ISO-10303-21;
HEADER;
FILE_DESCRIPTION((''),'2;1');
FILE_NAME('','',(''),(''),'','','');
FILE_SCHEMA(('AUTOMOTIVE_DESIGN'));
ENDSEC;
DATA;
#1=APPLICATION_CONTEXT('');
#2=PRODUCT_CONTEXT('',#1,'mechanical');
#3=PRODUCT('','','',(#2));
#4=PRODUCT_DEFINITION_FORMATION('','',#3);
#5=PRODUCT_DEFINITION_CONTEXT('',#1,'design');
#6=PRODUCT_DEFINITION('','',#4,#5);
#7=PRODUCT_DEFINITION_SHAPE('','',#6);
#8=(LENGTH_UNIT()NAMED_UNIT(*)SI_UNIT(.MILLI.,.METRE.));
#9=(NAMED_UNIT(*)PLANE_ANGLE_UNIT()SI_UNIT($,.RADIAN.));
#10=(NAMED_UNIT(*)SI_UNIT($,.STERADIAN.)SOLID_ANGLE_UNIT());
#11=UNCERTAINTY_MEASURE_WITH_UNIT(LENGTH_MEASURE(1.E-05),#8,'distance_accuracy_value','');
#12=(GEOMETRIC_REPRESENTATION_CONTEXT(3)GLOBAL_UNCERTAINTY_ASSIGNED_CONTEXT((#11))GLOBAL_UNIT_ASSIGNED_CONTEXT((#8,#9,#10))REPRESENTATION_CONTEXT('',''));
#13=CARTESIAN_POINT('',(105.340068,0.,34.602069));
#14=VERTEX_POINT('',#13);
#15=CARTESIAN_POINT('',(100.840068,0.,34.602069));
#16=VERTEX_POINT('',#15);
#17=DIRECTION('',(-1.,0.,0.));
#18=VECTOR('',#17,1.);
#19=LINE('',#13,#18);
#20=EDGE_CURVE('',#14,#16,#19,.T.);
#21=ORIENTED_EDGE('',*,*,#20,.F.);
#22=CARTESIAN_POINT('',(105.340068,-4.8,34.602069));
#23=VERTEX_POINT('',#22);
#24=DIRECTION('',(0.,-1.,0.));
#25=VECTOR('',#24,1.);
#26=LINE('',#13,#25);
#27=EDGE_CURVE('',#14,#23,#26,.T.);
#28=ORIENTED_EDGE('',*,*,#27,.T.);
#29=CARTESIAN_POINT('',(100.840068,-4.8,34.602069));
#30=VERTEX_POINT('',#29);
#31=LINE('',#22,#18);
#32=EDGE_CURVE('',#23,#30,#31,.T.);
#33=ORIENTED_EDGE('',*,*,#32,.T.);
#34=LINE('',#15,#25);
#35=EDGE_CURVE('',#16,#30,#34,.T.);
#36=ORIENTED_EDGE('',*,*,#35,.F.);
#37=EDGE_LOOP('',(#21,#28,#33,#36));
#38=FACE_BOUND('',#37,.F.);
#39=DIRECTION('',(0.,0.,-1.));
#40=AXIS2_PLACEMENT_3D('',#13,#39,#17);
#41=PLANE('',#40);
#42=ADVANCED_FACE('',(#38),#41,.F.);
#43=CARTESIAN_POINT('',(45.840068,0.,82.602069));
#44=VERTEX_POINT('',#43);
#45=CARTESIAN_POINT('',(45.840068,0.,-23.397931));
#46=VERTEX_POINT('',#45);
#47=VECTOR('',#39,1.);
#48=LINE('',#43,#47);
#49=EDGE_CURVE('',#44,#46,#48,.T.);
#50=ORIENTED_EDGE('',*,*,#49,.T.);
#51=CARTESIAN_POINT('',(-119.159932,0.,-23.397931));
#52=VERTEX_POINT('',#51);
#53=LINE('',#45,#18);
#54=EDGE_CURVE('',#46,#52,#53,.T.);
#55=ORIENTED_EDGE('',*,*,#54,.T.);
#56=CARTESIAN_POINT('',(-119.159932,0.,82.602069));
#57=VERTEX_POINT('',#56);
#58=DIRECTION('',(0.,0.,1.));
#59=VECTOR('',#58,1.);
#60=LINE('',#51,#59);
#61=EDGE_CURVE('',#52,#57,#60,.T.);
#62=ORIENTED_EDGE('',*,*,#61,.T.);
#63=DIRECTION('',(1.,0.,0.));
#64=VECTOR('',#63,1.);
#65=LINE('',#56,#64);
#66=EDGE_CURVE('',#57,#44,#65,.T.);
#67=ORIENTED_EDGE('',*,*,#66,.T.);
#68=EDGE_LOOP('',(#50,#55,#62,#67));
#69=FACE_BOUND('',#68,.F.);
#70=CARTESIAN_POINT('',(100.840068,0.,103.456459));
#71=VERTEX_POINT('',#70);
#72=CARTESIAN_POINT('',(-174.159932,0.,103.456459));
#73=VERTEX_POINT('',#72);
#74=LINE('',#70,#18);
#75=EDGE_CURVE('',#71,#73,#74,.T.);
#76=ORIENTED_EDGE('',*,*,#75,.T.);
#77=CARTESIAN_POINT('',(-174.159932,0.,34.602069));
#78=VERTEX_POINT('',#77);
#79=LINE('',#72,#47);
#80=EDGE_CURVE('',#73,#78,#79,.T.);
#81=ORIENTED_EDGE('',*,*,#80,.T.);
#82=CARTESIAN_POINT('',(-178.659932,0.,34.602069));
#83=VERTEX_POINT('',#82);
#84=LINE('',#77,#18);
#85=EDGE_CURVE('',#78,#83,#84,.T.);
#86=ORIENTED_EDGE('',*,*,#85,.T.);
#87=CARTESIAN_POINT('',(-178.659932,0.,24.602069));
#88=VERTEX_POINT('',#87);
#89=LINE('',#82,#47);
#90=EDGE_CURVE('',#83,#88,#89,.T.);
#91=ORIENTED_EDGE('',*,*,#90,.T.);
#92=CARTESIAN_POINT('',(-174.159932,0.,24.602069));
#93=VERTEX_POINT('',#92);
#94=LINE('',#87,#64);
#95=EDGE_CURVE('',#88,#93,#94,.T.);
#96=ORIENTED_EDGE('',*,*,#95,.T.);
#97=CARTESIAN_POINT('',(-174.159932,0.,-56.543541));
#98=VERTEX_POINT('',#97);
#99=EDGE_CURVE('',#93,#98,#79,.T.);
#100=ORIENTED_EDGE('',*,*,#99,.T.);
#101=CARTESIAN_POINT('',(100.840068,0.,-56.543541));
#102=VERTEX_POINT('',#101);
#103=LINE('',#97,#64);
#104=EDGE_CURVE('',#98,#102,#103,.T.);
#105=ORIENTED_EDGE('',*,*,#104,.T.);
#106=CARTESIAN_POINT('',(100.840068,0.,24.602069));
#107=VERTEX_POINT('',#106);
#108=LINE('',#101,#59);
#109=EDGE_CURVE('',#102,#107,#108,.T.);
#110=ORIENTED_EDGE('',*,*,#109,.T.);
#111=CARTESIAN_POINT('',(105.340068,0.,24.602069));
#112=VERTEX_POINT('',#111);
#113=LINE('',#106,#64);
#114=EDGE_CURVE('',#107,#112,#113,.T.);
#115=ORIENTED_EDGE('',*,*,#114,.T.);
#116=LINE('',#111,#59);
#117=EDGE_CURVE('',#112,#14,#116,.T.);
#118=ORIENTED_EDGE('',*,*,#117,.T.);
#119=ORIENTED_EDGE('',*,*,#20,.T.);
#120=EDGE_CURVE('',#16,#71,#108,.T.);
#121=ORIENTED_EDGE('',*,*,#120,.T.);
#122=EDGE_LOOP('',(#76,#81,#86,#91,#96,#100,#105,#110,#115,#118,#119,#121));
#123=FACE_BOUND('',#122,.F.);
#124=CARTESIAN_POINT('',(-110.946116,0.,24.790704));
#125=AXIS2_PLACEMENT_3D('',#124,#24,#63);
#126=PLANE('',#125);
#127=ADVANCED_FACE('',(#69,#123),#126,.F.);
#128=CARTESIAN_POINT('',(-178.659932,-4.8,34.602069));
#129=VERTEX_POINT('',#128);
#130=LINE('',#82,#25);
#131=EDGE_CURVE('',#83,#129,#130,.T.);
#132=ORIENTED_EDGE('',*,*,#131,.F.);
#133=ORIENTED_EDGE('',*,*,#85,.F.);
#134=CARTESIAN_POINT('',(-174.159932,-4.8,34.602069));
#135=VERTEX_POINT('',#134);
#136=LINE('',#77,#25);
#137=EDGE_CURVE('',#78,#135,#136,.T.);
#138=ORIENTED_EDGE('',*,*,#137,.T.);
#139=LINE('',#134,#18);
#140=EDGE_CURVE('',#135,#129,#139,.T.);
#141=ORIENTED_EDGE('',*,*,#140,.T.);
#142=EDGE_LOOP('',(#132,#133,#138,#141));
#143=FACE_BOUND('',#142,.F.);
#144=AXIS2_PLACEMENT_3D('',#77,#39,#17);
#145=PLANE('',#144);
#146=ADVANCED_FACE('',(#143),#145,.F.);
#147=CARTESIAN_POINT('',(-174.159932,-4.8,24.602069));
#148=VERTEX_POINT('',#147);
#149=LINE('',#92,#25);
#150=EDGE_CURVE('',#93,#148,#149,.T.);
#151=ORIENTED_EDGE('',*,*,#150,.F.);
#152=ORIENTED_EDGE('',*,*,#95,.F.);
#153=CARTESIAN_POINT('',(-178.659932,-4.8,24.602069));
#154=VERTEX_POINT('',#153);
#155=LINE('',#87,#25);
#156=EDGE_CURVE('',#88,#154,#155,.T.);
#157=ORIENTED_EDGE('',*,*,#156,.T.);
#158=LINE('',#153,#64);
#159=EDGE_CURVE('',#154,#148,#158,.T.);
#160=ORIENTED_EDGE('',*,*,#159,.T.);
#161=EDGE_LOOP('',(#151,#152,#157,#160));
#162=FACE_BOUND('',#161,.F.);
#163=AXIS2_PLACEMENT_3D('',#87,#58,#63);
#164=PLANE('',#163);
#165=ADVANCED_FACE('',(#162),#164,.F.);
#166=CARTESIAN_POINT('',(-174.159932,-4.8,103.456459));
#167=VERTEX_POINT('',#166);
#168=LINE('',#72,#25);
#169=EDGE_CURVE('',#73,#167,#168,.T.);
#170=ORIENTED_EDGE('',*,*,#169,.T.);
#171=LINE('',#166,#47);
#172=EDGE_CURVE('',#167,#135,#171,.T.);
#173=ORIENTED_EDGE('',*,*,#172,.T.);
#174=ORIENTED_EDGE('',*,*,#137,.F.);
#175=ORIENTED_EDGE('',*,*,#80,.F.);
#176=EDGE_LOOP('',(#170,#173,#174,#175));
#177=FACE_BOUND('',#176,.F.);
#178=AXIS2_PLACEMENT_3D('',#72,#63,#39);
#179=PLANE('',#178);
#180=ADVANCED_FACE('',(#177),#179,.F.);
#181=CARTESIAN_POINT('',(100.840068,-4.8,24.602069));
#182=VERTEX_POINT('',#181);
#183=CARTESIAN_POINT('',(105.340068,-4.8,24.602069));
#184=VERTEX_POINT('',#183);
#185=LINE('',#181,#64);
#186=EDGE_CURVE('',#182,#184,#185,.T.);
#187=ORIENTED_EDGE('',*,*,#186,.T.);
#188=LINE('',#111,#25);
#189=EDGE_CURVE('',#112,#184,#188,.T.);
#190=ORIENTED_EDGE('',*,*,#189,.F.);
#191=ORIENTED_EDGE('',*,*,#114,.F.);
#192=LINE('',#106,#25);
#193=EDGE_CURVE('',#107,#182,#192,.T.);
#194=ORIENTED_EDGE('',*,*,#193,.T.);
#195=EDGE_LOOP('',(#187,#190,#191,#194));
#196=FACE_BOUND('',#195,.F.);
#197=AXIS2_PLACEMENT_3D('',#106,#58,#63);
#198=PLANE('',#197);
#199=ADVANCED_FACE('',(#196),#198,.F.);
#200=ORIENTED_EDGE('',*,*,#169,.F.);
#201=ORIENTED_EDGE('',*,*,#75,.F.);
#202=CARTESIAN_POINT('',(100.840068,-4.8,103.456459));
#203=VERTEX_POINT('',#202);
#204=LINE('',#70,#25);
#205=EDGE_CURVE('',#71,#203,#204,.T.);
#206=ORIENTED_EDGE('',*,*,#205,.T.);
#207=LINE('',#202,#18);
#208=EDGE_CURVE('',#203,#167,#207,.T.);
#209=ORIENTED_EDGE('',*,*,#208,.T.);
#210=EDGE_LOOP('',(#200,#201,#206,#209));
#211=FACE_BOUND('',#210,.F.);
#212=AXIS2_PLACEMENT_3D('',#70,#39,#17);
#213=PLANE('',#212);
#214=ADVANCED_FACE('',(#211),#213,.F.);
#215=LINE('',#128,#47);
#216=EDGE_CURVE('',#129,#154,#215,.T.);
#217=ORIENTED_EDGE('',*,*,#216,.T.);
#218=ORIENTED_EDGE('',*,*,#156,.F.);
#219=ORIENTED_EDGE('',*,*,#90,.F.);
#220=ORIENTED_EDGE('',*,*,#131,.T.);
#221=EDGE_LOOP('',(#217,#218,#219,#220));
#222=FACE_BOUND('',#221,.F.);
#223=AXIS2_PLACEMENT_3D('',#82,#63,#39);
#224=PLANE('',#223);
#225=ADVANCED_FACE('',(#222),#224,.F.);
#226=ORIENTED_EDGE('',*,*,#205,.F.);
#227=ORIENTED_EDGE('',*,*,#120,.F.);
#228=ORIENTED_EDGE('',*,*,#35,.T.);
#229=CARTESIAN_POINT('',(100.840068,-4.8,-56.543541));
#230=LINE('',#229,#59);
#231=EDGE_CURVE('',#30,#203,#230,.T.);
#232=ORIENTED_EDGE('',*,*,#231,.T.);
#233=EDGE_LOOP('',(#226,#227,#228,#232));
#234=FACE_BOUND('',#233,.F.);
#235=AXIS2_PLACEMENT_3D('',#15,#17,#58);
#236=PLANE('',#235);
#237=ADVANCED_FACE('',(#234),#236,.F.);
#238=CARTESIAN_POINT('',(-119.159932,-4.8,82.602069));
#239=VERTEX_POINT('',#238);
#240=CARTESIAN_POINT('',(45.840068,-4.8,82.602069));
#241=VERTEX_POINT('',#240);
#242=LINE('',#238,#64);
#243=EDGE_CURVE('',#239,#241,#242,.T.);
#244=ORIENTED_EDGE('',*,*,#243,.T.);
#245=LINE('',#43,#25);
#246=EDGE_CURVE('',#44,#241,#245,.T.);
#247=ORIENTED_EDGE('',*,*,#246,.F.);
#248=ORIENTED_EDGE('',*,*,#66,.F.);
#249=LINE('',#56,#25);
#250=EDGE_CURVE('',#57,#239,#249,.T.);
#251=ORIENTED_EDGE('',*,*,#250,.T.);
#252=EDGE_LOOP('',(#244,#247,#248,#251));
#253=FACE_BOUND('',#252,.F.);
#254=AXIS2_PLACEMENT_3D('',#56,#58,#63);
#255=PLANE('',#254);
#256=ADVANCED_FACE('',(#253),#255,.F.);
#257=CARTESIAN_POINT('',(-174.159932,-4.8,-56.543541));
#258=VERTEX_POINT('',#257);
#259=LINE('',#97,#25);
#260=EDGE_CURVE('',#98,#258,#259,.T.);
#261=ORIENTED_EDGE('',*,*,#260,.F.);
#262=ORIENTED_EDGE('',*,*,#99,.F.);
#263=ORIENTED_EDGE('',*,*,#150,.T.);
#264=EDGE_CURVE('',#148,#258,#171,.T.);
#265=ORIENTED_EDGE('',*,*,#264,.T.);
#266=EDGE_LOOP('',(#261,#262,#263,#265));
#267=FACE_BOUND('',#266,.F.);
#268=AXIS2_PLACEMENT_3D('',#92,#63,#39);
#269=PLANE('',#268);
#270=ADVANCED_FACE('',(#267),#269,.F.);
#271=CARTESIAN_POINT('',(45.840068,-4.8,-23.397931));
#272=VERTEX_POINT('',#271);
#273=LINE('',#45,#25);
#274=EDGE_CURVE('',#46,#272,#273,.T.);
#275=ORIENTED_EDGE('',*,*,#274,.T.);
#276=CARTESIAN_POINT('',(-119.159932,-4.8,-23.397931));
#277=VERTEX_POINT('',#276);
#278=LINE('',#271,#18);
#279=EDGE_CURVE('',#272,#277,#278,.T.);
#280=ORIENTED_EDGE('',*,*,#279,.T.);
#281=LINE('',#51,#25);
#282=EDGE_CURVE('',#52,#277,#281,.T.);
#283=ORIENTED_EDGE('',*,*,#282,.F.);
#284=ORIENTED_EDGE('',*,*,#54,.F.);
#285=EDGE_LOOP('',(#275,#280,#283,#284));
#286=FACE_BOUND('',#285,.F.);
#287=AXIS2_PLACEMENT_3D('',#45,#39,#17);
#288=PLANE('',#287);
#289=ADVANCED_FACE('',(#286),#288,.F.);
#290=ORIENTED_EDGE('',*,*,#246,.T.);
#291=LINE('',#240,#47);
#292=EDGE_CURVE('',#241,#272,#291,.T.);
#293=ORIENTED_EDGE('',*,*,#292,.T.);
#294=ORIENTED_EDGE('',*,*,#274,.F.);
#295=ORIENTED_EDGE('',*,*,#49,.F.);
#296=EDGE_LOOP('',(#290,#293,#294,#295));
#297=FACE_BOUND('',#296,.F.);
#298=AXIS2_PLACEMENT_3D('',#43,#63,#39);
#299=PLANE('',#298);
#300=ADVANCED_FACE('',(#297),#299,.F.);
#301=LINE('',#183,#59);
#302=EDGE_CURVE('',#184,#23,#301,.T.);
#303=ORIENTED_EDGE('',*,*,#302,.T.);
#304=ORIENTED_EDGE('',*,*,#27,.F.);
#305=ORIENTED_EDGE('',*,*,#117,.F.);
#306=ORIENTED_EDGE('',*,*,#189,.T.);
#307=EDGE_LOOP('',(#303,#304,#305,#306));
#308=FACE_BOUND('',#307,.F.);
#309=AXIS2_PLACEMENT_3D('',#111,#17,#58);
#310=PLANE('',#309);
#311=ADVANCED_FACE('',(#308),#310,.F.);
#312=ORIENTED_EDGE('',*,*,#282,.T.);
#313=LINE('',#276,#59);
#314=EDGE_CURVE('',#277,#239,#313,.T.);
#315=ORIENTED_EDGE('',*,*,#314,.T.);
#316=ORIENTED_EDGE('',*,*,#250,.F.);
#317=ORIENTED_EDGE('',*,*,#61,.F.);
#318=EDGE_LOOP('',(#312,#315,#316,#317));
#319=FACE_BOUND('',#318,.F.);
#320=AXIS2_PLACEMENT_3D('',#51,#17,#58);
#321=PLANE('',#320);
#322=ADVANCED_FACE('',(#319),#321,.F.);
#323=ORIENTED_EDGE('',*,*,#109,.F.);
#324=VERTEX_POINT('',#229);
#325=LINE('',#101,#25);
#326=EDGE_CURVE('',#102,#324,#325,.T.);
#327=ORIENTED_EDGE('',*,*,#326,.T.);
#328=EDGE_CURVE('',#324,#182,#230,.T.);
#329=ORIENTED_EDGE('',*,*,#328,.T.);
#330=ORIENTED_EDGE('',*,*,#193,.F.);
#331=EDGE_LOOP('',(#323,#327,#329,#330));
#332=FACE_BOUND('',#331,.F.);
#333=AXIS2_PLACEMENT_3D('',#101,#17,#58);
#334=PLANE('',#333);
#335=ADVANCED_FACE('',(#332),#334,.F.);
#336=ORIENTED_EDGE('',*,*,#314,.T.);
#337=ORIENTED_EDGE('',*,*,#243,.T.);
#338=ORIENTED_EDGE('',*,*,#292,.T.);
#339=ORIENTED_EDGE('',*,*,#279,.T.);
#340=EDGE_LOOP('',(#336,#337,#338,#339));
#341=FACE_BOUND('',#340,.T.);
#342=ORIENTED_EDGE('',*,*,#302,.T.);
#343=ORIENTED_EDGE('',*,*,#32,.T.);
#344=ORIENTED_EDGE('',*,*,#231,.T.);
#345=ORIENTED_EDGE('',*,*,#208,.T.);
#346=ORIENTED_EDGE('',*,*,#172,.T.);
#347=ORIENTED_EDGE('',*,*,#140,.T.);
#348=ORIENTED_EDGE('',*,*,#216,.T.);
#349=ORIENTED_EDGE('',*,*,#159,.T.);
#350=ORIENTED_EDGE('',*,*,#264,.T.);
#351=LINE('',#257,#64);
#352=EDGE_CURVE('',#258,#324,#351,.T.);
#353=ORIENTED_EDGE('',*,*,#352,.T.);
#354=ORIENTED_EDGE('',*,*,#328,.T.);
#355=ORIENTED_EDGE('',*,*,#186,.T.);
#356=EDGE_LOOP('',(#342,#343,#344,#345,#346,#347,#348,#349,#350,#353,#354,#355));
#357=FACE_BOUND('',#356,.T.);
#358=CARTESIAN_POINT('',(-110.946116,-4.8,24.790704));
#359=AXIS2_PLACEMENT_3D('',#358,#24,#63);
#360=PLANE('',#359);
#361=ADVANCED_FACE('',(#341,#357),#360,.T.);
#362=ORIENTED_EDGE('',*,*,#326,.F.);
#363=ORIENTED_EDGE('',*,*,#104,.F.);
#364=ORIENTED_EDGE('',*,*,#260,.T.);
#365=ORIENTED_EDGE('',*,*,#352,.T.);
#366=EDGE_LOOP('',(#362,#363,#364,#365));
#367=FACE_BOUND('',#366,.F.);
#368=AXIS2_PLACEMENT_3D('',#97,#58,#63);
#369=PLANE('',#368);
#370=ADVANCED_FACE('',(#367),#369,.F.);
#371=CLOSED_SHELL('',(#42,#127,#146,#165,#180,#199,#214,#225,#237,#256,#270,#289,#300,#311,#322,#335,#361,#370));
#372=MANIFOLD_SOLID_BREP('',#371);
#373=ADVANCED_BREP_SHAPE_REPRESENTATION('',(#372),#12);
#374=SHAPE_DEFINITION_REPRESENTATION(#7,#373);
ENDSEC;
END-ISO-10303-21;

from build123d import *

# Parameters (mm, degrees)
F1_DEPTH = 4.8


# Not quite as in the source:
# - a feature names something its author has since deleted; it is built from what else it names


with BuildPart() as f1:
    # F0 (on Front) → F1 (new body)
    with BuildSketch(Plane.XZ):
        Polygon((-36.6599317901, 103.4564594077), (-174.1599317901, 103.4564594077), (-174.1599317901, 34.6020694077), (-174.1599317901, 29.6020694077), (-174.1599317901, 24.6020694077), (-174.1599317901, -56.5435405923), (-36.6599317901, -56.5435405923), (-36.6599317901, -23.3979305923), (-119.1599317901, -23.3979305923), (-119.1599317901, 82.6020694077), (-36.6599317901, 82.6020694077), align=None)
        Polygon((100.8400682099, 103.4564594077), (-36.6599317901, 103.4564594077), (-36.6599317901, 82.6020694077), (45.8400682099, 82.6020694077), (45.8400682099, -23.3979305923), (-36.6599317901, -23.3979305923), (-36.6599317901, -56.5435405923), (100.8400682099, -56.5435405923), (100.8400682099, 24.6020694077), (100.8400682099, 29.6020694077), (100.8400682099, 34.6020694077), align=None)
        Polygon((105.3400682099, 34.6020694077), (100.8400682099, 34.6020694077), (100.8400682099, 29.6020694077), (101.9359001704, 29.6020694077), (105.3400682099, 29.6020694077), align=None)
        Polygon((101.9359001704, 29.6020694077), (100.8400682099, 29.6020694077), (100.8400682099, 24.6020694077), (101.9359001704, 24.6020694077), (105.3400682099, 24.6020694077), (105.3400682099, 29.6020694077), align=None)
        Polygon((-174.1599317901, 29.6020694077), (-174.1599317901, 34.6020694077), (-178.6599317901, 34.6020694077), (-178.6599317901, 29.6020694077), (-175.2557637506, 29.6020694077), align=None)
        Polygon((-174.1599317901, 24.6020694077), (-174.1599317901, 29.6020694077), (-175.2557637506, 29.6020694077), (-178.6599317901, 29.6020694077), (-178.6599317901, 24.6020694077), (-175.2557637506, 24.6020694077), align=None)
    extrude(amount=F1_DEPTH)


solid = f1.part
